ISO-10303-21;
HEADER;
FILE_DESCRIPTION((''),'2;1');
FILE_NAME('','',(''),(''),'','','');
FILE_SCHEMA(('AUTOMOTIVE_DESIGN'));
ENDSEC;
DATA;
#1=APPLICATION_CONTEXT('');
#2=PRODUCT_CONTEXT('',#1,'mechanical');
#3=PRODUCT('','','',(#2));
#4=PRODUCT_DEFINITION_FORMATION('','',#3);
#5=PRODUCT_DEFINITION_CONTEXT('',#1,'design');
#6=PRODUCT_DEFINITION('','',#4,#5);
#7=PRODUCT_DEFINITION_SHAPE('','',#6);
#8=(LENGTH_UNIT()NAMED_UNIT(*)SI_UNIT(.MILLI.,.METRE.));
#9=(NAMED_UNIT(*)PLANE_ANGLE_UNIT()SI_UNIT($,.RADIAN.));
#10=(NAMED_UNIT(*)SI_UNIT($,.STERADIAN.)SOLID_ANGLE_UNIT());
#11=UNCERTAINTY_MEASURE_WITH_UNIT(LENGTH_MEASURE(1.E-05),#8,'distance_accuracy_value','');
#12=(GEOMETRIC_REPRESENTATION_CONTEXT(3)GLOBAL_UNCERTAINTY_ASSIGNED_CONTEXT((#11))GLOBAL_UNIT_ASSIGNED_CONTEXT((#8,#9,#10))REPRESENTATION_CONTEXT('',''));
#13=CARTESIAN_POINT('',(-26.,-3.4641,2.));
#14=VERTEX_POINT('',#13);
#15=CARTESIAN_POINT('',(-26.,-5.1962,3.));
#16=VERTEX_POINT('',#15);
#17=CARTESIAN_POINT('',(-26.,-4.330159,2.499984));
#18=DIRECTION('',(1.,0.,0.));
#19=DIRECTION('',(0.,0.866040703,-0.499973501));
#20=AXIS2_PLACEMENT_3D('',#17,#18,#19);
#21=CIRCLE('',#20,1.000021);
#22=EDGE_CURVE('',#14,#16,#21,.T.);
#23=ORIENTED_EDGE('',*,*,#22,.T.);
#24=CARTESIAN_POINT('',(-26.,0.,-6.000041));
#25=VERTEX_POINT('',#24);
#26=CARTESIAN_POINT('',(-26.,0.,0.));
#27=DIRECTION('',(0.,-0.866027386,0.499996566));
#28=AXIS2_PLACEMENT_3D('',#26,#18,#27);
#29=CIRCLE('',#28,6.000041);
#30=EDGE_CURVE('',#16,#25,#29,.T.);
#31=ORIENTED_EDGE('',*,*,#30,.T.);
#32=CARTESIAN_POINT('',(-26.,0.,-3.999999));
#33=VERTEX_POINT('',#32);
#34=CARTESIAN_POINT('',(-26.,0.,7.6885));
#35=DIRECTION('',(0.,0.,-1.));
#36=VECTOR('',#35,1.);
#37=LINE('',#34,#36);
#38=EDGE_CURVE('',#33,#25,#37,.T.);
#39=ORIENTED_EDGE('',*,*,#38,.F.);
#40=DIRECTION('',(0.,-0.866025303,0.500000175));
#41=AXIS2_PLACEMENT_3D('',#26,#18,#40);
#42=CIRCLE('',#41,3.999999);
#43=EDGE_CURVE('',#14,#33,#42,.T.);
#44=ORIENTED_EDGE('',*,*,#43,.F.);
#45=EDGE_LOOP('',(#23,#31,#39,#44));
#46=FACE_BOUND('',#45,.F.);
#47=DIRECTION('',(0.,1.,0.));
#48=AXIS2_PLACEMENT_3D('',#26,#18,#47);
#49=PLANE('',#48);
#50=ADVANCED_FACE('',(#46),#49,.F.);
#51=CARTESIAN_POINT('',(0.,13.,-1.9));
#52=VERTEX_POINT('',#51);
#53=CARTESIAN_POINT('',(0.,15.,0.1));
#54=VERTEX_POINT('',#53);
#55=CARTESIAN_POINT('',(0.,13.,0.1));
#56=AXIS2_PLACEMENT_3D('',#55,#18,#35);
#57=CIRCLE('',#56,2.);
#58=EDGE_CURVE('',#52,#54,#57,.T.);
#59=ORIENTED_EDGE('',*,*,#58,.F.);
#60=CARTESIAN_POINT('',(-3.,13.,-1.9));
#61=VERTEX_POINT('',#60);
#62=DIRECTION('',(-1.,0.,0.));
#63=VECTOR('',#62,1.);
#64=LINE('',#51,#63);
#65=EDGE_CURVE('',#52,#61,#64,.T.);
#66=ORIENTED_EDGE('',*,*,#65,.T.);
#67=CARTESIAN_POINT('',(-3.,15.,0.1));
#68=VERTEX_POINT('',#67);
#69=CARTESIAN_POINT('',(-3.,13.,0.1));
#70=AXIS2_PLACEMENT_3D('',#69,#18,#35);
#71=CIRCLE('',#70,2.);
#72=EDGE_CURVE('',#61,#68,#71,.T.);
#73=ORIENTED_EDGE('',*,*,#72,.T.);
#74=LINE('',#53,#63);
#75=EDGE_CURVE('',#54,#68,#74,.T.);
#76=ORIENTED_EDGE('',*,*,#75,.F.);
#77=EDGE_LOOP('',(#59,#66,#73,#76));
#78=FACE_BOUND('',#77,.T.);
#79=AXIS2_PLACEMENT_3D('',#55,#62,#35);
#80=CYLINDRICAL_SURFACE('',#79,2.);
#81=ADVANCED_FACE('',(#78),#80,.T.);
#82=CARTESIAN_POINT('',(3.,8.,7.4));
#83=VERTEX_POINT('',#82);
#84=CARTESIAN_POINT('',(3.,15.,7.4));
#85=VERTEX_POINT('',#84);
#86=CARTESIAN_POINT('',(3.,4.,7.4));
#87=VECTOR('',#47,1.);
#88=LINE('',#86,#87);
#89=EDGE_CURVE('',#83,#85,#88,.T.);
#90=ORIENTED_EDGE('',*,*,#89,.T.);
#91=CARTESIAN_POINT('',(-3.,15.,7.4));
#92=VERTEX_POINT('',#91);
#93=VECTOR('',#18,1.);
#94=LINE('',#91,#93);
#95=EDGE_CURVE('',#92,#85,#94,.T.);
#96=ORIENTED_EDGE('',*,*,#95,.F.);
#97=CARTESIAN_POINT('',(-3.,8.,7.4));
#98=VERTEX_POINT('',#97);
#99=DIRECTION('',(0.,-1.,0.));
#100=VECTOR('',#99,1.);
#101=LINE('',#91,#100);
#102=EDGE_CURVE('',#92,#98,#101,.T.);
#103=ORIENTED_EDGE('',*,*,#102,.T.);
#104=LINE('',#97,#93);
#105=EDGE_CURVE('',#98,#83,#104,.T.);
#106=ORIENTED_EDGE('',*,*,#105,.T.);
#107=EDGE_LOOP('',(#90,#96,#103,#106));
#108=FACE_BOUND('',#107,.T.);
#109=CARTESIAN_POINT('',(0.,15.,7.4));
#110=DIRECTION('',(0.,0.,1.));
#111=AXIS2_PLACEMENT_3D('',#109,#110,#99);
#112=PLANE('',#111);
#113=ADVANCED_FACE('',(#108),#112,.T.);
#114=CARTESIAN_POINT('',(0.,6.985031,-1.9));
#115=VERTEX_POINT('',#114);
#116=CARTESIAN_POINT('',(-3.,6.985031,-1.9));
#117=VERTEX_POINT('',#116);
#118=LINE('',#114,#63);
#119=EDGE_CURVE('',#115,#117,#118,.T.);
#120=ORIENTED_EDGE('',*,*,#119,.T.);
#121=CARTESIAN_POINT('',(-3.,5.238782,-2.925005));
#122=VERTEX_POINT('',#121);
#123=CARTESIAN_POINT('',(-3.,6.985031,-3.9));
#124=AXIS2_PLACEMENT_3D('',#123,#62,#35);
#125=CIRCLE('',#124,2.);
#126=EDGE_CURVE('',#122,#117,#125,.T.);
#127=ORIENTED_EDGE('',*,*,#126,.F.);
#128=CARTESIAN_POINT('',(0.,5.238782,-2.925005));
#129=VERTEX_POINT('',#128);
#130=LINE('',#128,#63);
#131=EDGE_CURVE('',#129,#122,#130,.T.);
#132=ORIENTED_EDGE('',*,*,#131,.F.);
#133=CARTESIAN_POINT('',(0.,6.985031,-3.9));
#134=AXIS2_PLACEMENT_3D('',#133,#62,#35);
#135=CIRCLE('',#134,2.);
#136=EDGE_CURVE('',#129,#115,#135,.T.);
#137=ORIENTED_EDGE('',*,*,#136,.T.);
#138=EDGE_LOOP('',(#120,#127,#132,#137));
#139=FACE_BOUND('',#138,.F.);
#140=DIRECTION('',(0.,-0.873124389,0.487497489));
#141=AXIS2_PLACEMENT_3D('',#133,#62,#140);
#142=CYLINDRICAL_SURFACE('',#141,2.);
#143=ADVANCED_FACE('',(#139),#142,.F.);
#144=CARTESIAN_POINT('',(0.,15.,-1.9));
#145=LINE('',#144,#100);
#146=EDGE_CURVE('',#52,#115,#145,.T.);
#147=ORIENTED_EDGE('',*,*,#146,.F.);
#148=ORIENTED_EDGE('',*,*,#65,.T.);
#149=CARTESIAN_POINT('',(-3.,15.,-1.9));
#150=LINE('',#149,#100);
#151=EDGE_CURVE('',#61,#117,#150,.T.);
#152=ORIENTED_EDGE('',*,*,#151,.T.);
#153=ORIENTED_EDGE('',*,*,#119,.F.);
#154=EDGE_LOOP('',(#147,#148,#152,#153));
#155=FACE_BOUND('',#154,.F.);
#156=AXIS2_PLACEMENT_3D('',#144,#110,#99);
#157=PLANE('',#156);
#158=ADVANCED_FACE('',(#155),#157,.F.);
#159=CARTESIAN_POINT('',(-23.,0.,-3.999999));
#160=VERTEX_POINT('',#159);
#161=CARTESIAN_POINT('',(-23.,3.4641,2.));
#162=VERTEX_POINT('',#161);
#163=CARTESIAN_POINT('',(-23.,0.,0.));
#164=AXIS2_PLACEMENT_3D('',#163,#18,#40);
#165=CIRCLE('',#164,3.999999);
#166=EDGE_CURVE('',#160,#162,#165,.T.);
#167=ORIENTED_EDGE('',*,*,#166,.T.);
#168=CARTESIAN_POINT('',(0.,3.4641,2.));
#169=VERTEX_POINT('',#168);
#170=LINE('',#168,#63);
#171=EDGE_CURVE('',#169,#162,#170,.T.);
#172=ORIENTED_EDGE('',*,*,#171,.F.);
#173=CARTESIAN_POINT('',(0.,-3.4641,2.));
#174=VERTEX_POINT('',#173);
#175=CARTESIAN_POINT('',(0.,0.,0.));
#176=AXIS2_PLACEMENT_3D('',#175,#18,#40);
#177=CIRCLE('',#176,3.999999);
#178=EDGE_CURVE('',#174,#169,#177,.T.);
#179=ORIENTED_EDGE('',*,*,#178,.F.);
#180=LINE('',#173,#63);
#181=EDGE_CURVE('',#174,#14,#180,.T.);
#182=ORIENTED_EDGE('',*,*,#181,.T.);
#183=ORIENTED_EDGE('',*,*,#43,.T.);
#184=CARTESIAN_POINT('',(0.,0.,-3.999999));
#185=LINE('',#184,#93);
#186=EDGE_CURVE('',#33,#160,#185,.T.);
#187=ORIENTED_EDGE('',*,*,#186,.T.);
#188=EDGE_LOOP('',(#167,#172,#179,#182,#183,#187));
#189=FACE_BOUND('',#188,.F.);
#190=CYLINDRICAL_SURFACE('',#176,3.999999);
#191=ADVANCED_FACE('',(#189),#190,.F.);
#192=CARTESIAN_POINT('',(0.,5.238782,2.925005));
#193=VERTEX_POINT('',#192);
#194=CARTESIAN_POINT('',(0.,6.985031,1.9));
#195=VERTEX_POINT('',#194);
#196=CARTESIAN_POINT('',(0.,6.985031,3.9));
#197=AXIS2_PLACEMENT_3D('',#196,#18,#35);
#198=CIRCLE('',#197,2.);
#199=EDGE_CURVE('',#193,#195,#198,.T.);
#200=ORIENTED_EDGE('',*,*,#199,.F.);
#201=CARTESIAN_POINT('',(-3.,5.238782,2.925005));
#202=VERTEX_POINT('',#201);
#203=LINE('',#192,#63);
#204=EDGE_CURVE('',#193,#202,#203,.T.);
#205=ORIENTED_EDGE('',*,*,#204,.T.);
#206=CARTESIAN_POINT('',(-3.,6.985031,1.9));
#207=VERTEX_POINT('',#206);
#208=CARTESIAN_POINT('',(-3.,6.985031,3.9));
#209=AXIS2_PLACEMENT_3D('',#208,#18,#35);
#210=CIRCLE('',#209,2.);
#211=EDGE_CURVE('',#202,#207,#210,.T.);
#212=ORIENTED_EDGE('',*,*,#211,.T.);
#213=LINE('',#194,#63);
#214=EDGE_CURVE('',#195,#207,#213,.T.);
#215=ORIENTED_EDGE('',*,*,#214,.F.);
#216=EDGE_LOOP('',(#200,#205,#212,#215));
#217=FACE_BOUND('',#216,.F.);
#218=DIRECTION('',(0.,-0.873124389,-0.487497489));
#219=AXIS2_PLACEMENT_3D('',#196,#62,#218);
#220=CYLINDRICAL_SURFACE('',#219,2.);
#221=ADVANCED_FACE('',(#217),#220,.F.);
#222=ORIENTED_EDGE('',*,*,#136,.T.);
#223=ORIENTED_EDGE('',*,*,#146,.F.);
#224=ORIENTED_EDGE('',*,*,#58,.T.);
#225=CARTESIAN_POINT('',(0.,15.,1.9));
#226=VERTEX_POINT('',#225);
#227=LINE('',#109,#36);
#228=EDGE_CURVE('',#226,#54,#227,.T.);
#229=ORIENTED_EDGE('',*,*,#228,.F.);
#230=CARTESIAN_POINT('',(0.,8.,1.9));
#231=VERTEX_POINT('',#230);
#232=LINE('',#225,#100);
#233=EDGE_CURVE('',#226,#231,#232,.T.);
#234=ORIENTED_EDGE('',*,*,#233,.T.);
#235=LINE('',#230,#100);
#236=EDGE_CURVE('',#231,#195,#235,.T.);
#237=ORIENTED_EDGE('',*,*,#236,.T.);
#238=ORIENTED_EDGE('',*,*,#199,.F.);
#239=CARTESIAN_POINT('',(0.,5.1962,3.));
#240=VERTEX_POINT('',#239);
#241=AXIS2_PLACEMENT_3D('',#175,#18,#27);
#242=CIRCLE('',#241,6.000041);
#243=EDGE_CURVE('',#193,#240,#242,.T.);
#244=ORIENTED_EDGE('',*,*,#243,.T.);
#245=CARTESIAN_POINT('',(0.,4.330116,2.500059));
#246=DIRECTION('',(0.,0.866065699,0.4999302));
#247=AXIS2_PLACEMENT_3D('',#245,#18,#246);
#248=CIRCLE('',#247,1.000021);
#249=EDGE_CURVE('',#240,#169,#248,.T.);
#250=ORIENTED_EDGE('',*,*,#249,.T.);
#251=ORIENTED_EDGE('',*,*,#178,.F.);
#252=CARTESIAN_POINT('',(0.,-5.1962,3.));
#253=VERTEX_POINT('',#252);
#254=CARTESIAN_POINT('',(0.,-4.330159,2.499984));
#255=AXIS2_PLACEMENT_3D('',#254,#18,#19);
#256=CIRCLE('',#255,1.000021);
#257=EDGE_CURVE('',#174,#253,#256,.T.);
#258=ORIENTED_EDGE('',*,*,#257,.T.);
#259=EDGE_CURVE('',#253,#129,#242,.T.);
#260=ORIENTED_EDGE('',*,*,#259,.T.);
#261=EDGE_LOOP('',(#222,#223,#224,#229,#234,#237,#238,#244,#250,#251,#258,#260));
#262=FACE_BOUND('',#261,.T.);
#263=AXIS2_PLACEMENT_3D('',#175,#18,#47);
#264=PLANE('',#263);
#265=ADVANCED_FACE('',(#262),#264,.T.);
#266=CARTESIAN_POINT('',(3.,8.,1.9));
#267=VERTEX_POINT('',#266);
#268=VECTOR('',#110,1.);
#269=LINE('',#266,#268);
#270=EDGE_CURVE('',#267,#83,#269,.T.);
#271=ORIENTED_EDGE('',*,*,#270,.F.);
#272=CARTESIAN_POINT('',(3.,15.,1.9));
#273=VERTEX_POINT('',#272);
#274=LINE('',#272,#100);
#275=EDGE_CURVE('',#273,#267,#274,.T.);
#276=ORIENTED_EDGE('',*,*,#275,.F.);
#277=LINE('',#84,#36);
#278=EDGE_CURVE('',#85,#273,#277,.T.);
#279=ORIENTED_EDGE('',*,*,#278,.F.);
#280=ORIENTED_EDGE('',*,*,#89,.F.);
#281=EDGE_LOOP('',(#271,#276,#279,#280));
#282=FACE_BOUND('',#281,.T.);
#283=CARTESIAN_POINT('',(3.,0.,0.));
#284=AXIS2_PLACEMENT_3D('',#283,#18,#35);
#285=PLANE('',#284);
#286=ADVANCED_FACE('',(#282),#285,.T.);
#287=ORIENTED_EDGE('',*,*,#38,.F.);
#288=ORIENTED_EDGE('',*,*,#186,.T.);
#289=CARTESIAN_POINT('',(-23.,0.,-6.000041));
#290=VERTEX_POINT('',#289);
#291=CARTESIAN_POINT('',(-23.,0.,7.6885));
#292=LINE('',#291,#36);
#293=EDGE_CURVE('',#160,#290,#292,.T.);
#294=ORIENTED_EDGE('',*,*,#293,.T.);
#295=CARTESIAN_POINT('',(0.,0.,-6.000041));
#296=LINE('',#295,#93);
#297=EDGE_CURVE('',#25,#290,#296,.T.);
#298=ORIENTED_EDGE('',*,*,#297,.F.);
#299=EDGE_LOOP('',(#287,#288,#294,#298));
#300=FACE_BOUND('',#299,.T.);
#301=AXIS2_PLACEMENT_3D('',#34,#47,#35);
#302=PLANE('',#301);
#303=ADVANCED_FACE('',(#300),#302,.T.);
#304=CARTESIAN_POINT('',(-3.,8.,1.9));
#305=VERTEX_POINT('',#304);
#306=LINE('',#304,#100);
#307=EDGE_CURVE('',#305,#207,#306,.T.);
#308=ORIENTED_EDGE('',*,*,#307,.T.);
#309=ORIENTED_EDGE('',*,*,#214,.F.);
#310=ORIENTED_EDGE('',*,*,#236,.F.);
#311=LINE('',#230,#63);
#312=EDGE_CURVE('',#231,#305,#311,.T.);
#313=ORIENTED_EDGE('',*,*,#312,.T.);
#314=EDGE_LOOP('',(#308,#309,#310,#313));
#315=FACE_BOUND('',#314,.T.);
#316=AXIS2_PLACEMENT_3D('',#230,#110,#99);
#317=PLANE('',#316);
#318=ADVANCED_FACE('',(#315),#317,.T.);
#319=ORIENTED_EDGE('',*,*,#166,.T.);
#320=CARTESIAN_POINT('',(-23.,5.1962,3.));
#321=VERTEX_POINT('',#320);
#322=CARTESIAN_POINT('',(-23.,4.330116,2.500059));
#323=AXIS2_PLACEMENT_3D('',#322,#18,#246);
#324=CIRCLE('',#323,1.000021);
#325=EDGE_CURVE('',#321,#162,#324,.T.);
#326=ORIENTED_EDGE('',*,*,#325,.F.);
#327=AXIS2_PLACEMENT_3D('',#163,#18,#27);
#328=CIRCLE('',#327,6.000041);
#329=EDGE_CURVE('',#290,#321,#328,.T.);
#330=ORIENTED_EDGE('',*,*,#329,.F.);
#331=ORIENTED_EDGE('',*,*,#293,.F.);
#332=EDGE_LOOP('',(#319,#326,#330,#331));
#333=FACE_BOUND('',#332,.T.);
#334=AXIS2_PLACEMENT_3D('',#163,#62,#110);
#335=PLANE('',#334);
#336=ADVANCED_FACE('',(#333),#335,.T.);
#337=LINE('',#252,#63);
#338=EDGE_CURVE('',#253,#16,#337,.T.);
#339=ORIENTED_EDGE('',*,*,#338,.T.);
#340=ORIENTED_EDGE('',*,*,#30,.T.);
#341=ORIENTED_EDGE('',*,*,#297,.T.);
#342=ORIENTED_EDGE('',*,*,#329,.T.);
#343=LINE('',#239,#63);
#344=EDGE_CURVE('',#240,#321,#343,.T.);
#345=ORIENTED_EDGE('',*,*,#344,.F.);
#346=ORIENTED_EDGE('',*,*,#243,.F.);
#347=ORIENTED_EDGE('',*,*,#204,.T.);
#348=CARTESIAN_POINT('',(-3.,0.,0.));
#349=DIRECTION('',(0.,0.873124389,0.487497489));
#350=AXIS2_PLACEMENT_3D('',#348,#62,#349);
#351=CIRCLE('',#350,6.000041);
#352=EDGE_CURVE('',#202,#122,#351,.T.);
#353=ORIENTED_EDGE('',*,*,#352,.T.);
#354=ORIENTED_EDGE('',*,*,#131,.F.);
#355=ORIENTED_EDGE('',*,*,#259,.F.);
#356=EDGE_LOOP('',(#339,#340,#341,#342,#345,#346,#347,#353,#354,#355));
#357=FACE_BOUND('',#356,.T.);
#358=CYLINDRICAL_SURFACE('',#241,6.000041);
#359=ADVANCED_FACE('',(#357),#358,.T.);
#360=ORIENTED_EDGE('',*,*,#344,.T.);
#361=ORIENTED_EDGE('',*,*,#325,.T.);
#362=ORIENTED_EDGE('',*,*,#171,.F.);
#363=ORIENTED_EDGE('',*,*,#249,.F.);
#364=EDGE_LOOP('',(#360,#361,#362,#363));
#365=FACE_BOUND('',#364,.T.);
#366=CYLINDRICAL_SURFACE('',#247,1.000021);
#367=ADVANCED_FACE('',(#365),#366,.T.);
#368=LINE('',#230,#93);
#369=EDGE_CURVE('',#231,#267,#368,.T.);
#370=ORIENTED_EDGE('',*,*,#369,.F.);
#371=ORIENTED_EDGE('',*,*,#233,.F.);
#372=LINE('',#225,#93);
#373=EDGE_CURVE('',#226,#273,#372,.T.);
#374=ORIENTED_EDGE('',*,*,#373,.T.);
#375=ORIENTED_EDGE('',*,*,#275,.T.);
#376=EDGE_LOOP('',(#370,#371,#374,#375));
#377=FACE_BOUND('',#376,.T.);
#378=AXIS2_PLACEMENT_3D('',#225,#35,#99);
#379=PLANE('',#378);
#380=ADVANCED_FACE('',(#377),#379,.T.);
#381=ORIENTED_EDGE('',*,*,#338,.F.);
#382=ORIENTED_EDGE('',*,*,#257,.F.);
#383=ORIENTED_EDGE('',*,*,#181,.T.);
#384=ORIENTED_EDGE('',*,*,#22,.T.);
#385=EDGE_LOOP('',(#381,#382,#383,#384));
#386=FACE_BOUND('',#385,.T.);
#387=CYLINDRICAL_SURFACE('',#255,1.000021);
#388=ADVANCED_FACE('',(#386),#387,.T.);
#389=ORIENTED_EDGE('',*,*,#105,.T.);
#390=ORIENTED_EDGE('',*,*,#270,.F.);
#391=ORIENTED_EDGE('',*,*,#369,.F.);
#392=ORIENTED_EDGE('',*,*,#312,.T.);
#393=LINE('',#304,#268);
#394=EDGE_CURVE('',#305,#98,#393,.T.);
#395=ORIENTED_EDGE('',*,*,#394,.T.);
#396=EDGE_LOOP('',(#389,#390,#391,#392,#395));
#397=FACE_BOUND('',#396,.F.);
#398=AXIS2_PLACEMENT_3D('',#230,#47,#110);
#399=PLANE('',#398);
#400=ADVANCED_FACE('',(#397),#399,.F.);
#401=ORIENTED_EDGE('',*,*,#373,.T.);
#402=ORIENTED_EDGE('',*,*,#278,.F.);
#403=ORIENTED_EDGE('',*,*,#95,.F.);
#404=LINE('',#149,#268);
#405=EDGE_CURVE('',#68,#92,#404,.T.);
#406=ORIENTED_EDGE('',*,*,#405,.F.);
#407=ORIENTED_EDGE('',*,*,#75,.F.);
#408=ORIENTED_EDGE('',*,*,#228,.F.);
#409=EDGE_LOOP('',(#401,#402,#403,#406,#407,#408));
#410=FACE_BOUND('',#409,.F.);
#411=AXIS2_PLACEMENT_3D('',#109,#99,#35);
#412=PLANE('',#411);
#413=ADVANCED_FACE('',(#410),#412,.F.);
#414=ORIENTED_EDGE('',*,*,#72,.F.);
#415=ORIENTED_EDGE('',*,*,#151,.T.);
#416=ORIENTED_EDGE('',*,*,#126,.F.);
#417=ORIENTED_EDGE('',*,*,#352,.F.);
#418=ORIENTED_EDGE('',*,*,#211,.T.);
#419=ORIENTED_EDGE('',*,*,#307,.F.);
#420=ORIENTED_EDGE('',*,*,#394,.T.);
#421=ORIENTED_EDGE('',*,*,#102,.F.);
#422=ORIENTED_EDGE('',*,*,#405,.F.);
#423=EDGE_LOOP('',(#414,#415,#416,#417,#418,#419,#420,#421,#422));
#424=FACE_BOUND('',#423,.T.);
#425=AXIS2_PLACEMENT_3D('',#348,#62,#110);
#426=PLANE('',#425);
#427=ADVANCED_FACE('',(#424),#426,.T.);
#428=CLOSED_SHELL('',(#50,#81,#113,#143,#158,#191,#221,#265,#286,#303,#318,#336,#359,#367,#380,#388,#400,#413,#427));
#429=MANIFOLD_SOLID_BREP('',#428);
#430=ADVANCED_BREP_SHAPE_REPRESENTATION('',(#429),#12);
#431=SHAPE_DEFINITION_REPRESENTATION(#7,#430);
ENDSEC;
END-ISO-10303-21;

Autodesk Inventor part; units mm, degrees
ref_plane "YZ Plane" through (0, 0, 0) normal (1, 0, 0) x (0, 1, 0)
ref_plane "XZ Plane" through (0, 0, 0) normal (0, 1, 0) x (-1, 0, 0)
ref_plane "XY Plane" through (0, 0, 0) normal (0, 0, 1) x (1, 0, 0)
sketch "Sketch1" plane through (0, 0, 0) normal (1, 0, 0) x (0, 1, 0)
  arc A0 (-3.4641, 2) -> (3.4641, 2) centre (0, 0) ccw
  arc A1 (-5.1962, 3) -> (5.1962, 3) centre (0, 0) ccw
  arc A2 (5.1962, 3) -> (3.4641, 2) centre (4.3301, 2.5) ccw
  arc A3 (-3.4641, 2) -> (-5.1962, 3) centre (-4.3301, 2.5) ccw
  dimension "d0" = 8
  dimension "d1" = 12
  dimension "d2" = 2.5
extrude "Extrusion1" add sketch "Sketch1" against normal blind 26
sketch "Sketch2" plane through (0, 0, 0) normal (1, 0, 0) x (0, 0, -1)
  line L0 (-7.4, 15) -> (3.6, 15)
  line L1 (3.6, 15) -> (3.6, 4)
  line L2 (3.6, 4) -> (-7.4, 4)
  line L3 (-7.4, 4) -> (-7.4, 15)
  arc A0 (-2, -3.4641) -> (-2, 3.4641) centre (0, 0) ccw projected
  line L4 (-7.4, 15) -> (-1.9, 15)
  line L5 (-1.9, 15) -> (-1.9, 8)
  line L6 (-1.9, 8) -> (-7.4, 8)
  line L7 (-7.4, 8) -> (-7.4, 15)
  dimension "d5" = 11
  dimension "d6" = 11
  dimension "d7" = 7.4
  dimension "d8" = 5.5
  dimension "d9" = 7
extrude "Extrusion2" add sketch "Sketch2" along normal blind 3 contours L0 L5 L6 L3
sketch "Sketch3" plane through (0, 0, 0) normal (-1, 0, 0) x (0, 0, 1)
  line L0 (7.4, 15) -> (7.4, 8) projected
  line L1 (7.4, 15) -> (-1.9, 15)
  line L2 (1.9, 8) -> (7.4, 8)
  line L3 (7.4, 8) -> (7.4, 15)
  arc A0 (2, 3.4641) -> (2, -3.4641) centre (0, 0) ccw projected
  line L4 (7.4, 8) -> (1.9, 8) projected
  line L5 (1.9, 8) -> (1.9, 15) projected
  line L6 (1.9, 8) -> (1.9, 5.6912)
  arc A1 (3, 5.1962) -> (3, -5.1962) centre (0, 0) ccw projected
  line L7 (-1.9, 15) -> (-1.9, 5.6912)
  dimension "d12" = 1.9
extrude "Extrusion3" add sketch "Sketch3" along normal blind 3
fillet "Fillet1" radius 2 3 edges at (-1.5, 5.6912, 1.9) (-1.5, 5.6912, -1.9) (-1.5, 15, -1.9)
sketch "Sketch4" plane through (-26, 0, 0) normal (-1, 0, 0) x (0, 0, 1)
  line L0 (7.6885, 0) -> (-10.3871, 0)
  line L1 (-10.3871, 0) -> (-10.3871, 6.8992)
  line L2 (-10.3871, 6.8992) -> (7.6885, 6.8992)
  line L3 (7.6885, 6.8992) -> (7.6885, 0)
  point P0 (0, 0)
extrude "Extrusion4" cut sketch "Sketch4" against normal blind 3
properties part number "Roller_Spacer_P"
